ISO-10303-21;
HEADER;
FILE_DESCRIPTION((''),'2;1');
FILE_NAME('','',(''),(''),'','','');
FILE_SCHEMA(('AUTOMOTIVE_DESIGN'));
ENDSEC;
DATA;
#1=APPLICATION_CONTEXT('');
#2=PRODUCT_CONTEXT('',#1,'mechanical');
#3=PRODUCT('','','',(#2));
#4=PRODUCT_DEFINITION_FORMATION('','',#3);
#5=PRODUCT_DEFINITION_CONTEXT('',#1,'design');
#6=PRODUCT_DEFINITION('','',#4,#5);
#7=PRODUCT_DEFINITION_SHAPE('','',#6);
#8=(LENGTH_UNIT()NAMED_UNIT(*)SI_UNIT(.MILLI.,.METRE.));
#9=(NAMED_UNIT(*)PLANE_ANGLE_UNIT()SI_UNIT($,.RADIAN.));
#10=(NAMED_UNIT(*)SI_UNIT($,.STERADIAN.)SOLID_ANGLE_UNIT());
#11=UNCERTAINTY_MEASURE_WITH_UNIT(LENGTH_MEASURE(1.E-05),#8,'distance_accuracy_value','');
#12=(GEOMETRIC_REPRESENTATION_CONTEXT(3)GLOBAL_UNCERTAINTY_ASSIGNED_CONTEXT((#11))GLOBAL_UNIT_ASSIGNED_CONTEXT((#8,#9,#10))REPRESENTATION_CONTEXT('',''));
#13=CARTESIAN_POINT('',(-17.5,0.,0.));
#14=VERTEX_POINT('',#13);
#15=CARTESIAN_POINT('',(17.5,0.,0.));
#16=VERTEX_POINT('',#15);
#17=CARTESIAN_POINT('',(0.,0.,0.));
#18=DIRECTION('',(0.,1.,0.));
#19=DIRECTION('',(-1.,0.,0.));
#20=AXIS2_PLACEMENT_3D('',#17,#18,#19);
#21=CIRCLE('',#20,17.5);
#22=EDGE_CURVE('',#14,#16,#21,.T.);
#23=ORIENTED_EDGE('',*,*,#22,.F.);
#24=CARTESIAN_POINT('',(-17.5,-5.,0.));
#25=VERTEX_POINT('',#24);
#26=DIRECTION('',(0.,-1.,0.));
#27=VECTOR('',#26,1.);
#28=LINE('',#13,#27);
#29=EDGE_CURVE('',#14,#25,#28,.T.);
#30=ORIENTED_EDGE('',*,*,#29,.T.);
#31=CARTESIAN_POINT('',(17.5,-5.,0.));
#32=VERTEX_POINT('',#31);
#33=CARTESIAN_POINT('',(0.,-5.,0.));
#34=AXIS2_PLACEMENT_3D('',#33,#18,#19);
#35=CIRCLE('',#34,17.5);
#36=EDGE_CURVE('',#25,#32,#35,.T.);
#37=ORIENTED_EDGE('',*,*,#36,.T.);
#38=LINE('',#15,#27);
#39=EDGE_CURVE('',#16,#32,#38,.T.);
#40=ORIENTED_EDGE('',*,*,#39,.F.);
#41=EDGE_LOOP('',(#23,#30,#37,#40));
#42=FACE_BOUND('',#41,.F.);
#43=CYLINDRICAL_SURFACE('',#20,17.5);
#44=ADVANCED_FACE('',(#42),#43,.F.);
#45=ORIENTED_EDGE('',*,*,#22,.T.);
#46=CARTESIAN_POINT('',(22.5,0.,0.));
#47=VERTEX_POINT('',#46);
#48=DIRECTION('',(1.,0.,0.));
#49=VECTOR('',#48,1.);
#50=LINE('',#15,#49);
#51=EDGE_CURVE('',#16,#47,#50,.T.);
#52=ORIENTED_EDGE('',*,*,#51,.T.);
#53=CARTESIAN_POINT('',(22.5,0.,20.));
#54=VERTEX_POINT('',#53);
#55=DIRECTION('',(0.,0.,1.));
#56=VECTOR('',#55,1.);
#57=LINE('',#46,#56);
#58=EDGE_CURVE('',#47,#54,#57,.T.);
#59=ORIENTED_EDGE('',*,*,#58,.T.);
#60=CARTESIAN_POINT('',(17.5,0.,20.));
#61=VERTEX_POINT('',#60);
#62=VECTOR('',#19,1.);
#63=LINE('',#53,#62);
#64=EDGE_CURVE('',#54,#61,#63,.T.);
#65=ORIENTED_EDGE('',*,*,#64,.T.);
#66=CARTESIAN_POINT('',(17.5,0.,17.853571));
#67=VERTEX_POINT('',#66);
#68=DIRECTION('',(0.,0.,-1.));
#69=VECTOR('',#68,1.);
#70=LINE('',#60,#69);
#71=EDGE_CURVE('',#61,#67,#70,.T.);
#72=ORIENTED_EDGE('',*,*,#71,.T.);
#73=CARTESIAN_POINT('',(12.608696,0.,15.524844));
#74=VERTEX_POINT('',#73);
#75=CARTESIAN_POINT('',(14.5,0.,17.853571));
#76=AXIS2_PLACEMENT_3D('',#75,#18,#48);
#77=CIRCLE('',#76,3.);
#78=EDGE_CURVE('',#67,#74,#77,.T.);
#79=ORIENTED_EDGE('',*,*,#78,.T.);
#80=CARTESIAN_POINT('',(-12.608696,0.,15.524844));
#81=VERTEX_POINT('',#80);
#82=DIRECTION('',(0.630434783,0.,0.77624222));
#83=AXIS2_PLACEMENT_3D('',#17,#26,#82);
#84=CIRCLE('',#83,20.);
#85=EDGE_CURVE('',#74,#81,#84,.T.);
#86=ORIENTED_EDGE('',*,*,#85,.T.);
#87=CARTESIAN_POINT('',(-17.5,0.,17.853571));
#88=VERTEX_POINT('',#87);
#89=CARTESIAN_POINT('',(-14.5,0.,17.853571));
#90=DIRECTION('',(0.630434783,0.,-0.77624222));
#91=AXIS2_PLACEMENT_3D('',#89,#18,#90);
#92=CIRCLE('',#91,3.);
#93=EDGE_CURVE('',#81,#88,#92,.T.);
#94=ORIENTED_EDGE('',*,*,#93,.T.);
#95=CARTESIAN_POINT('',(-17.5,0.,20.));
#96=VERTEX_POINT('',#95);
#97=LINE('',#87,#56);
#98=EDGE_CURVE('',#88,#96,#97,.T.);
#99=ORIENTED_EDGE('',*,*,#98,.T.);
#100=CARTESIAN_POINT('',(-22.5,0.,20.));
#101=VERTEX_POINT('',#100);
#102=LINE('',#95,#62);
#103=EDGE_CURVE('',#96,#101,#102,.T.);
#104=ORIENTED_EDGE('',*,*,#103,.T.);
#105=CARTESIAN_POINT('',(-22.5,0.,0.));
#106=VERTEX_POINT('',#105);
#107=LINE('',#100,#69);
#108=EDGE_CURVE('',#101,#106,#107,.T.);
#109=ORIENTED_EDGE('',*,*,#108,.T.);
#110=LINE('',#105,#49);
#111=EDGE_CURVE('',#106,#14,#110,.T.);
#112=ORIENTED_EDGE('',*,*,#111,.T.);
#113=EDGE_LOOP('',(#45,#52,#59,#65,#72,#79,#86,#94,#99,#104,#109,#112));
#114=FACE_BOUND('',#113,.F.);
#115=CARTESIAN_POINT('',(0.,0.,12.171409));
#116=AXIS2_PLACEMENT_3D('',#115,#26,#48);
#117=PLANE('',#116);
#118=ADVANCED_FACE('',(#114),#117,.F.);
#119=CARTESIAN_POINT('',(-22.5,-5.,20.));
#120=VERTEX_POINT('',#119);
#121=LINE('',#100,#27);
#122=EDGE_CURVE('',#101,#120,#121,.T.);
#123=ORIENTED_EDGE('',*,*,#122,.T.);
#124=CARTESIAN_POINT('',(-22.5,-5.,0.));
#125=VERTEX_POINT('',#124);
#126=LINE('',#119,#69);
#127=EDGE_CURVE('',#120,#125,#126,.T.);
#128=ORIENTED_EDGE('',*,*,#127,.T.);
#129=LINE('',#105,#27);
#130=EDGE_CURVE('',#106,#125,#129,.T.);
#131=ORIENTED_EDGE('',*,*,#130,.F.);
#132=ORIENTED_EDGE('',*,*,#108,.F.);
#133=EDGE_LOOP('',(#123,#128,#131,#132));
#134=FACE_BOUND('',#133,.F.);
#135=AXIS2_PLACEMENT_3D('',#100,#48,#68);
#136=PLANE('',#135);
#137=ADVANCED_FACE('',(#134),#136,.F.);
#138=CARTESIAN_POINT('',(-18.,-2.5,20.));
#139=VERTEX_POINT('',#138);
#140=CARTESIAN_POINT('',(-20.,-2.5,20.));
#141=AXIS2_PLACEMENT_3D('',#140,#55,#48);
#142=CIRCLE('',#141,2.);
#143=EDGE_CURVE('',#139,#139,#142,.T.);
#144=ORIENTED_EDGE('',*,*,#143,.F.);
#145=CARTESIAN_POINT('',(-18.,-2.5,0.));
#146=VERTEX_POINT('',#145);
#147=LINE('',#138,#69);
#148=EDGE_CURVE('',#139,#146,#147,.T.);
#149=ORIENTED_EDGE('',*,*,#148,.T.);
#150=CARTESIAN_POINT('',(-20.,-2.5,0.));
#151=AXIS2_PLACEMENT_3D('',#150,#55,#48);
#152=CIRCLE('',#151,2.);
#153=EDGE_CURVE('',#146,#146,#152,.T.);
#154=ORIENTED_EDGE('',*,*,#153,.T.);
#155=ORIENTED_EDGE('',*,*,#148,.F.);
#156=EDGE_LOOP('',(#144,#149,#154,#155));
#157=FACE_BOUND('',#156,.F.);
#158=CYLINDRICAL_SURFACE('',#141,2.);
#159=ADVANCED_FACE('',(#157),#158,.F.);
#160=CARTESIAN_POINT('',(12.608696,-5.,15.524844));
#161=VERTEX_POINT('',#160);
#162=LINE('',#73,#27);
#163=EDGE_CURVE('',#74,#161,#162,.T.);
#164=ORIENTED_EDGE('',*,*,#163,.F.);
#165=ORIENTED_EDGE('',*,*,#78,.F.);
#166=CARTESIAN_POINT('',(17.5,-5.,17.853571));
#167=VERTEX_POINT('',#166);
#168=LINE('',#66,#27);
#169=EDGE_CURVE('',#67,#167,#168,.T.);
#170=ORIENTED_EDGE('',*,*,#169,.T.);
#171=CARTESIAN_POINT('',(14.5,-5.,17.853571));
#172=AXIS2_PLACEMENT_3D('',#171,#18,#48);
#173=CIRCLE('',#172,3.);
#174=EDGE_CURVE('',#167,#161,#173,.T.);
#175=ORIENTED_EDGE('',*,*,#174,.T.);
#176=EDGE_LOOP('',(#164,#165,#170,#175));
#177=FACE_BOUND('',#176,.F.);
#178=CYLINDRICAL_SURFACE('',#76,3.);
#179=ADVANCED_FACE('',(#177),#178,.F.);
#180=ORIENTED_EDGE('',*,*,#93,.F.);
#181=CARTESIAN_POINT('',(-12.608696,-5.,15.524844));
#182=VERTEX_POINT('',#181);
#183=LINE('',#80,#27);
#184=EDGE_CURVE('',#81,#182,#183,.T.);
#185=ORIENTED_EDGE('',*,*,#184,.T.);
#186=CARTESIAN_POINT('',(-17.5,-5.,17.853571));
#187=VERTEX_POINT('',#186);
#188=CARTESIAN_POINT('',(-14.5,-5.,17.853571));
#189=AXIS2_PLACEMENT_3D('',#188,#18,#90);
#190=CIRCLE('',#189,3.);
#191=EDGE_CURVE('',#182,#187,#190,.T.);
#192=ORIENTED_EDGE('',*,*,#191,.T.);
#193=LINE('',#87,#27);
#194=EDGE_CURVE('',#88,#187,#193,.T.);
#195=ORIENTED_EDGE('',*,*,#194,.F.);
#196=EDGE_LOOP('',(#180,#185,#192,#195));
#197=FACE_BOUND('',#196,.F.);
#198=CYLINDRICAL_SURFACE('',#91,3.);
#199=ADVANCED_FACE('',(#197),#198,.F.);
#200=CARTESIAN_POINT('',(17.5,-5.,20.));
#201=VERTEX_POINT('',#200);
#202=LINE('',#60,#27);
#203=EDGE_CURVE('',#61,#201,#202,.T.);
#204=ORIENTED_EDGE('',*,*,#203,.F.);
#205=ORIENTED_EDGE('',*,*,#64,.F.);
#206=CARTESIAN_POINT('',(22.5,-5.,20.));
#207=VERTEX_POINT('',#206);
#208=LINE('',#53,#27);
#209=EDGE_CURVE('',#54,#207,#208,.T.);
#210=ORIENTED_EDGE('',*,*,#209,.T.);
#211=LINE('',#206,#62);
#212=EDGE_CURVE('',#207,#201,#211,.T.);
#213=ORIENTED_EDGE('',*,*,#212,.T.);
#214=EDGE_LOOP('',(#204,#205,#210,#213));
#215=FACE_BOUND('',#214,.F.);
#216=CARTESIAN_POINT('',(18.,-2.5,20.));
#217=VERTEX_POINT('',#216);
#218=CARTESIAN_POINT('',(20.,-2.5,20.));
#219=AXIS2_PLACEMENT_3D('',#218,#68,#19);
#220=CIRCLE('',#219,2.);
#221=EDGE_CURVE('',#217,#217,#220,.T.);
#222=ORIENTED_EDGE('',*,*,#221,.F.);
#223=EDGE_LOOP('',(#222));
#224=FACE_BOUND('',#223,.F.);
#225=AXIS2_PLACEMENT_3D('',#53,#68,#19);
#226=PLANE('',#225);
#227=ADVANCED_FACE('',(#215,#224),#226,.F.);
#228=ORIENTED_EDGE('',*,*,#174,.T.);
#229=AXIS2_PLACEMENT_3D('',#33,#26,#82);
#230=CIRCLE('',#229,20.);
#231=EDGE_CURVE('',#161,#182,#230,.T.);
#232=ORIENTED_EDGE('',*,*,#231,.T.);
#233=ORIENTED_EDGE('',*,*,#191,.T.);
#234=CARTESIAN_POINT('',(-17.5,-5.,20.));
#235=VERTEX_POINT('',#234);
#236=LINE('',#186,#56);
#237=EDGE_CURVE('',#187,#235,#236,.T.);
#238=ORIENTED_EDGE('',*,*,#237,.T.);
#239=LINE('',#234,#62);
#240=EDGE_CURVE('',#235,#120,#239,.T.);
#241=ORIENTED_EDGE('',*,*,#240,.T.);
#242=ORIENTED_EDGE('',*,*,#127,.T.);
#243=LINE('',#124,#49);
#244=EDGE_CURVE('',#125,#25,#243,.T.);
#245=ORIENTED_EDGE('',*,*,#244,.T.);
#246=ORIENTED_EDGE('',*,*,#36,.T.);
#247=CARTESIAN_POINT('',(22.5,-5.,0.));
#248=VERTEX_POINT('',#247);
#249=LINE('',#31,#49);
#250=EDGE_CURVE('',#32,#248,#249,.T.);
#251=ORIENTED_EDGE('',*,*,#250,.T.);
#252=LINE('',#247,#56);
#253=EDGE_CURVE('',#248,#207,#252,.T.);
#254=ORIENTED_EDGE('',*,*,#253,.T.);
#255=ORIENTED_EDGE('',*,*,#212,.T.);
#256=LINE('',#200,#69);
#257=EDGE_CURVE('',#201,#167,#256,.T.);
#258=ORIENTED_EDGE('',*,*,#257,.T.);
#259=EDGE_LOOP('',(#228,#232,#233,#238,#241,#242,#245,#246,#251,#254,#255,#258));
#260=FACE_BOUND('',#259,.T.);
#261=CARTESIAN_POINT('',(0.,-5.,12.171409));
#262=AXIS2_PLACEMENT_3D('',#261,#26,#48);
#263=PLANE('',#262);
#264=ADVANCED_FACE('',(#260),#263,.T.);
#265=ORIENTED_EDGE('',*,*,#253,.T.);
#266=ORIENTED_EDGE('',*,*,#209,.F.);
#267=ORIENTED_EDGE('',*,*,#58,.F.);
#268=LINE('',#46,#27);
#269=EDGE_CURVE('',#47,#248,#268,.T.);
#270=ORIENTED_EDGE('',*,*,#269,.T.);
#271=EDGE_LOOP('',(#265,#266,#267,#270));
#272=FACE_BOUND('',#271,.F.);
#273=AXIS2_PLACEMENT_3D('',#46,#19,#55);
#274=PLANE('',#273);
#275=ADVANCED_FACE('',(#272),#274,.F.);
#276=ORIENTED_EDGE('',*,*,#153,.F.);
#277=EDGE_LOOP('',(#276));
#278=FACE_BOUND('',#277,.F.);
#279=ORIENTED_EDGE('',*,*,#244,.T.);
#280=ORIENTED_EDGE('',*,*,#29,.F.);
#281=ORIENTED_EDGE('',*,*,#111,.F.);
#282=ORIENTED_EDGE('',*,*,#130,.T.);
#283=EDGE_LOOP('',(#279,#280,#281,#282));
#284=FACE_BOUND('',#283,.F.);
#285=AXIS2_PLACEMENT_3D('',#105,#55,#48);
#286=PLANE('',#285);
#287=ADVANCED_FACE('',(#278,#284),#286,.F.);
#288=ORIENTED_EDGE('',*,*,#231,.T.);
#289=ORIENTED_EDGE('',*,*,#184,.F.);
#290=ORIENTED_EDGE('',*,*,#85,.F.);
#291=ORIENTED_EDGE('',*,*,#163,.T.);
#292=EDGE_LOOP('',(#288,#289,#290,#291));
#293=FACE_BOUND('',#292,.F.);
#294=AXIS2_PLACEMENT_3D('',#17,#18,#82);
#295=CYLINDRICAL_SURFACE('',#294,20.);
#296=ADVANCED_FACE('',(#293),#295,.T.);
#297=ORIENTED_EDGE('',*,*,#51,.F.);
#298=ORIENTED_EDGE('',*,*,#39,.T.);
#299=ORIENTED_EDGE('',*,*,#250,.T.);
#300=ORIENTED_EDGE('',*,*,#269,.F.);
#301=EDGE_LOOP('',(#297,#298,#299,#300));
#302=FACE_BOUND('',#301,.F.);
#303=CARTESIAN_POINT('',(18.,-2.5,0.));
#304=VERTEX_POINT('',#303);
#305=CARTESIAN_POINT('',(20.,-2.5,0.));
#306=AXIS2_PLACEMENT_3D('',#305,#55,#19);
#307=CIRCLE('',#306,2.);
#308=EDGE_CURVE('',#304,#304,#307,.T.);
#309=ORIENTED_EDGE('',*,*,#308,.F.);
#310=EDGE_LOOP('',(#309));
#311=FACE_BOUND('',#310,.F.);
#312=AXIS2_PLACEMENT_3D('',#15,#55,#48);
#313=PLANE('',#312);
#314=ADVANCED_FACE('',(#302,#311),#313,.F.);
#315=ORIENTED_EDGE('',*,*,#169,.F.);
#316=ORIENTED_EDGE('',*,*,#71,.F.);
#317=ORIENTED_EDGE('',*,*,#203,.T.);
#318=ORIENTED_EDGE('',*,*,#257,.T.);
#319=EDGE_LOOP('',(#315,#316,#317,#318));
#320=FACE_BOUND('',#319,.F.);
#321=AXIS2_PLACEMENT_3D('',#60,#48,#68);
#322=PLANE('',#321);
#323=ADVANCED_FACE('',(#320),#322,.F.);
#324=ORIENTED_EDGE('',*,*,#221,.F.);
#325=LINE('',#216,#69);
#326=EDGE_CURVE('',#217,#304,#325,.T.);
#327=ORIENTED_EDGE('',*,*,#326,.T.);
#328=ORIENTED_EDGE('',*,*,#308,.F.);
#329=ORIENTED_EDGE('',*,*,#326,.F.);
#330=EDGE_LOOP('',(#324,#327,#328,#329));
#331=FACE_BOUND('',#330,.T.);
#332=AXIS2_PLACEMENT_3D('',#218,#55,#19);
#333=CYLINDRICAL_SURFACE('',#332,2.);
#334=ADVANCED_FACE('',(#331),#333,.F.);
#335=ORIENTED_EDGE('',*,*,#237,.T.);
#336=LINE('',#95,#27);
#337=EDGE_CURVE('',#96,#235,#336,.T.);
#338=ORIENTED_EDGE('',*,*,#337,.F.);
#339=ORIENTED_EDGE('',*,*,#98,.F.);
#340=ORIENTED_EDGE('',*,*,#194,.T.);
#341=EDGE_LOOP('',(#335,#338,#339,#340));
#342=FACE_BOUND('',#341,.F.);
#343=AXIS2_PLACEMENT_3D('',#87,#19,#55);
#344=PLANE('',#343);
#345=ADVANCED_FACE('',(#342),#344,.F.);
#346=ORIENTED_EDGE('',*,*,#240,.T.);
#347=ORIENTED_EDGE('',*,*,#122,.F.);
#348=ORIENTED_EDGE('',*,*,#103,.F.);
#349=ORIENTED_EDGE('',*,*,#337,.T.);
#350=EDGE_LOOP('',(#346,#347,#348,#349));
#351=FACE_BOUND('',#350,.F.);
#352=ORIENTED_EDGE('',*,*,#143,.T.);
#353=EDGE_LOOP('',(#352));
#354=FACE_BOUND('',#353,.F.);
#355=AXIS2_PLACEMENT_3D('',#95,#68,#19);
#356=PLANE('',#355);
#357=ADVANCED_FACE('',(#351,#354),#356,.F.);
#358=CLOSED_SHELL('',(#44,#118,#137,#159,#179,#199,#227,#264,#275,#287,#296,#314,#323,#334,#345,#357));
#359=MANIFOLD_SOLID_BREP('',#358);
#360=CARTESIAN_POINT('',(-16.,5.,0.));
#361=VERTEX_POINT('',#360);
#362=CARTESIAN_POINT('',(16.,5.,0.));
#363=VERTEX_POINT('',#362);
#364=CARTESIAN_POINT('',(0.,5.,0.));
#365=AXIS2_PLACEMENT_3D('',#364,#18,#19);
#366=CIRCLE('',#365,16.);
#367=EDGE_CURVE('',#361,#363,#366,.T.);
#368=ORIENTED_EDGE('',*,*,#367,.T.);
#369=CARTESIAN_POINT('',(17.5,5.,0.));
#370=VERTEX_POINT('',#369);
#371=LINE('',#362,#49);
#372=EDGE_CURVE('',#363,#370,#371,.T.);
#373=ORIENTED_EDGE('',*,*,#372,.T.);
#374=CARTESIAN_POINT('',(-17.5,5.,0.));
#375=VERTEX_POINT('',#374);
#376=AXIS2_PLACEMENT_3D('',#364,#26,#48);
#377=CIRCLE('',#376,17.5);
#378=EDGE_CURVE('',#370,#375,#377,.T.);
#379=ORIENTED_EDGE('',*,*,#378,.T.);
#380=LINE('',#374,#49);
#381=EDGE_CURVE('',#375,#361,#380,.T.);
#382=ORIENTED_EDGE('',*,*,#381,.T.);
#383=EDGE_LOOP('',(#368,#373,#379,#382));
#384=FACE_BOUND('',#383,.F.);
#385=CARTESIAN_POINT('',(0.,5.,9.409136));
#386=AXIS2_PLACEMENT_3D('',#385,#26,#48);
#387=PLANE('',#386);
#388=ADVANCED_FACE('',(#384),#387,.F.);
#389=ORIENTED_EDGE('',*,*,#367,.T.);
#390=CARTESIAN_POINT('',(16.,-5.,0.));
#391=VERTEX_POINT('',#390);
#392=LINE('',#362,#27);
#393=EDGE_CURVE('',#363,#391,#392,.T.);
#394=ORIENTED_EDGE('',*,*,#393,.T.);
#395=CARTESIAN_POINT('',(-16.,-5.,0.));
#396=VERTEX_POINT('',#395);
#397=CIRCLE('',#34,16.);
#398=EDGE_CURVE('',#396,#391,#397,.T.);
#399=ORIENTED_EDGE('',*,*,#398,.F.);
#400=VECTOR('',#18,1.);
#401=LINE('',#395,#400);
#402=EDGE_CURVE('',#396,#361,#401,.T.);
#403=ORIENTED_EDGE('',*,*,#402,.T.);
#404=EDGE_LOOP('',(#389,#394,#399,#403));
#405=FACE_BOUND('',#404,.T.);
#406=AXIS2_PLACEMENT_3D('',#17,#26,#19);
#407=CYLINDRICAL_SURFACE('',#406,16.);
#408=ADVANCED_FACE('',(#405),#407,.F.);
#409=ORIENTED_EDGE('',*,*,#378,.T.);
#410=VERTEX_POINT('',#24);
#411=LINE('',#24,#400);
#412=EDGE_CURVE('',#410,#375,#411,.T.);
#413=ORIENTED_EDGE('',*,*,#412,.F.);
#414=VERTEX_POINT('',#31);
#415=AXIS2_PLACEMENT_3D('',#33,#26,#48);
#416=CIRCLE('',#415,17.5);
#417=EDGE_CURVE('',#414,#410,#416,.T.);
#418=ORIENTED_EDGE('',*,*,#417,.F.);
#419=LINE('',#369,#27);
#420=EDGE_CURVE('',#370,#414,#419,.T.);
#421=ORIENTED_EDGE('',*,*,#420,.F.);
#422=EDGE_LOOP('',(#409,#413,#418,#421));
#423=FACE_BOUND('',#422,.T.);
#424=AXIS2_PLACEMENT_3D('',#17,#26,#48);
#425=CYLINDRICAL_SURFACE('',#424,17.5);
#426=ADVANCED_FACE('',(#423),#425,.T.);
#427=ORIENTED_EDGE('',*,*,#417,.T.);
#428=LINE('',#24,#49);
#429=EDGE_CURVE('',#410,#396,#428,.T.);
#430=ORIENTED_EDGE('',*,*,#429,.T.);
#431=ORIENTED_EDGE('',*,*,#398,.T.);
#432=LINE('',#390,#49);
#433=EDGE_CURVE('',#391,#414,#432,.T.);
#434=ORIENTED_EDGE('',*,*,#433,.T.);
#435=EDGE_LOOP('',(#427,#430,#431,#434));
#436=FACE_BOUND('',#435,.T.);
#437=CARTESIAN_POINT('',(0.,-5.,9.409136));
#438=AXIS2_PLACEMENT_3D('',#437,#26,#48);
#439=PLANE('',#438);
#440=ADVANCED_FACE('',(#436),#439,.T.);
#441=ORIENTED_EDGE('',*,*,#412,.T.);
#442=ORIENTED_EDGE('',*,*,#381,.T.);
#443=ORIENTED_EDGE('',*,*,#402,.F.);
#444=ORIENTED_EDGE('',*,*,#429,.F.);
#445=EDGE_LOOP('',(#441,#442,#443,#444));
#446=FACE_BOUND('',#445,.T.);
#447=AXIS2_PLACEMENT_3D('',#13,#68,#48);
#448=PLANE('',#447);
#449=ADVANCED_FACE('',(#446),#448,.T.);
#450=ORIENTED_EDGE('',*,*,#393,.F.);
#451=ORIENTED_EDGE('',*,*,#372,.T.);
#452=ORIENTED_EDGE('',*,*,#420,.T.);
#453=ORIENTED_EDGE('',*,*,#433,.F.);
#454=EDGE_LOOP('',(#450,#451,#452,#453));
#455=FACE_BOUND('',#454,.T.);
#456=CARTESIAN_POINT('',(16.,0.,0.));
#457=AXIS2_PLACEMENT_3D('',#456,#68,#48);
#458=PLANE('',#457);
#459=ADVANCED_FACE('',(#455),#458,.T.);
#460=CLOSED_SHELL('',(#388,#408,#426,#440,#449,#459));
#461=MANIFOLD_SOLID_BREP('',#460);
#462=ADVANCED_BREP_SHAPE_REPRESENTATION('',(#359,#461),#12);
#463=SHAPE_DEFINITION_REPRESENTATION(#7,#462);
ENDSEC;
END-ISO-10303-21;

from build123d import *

# Parameters (mm, degrees)
F1_DEPTH = 5
F2_R     = 2
F3_DEPTH = 20.001
F5_DEPTH = 5


# Not quite as in the source:
# - a pattern or mirror of a feature is missing from the dataset's text; its kind, count and spacing are read off the source's solid


with BuildPart() as f1:
    # F0 (on Front) → F1 (new body)
    with BuildSketch(Plane.XZ):
        with BuildLine():
            ThreePointArc((-17.5, 0), (0, 17.5), (17.5, 0))
            Line((17.5, 0), (22.5, 0))
            Line((22.5, 0), (22.5, 20))
            Line((22.5, 20), (17.5, 20))
            Line((17.5, 20), (17.5, 17.8535710714))
            ThreePointArc((17.5, 17.8535710714), (15.7895904304, 15.1448893769), (12.6086956522, 15.5248444099))
            ThreePointArc((12.6086956522, 15.5248444099), (0, 20), (-12.6086956522, 15.5248444099))
            ThreePointArc((-12.6086956522, 15.5248444099), (-15.7895904304, 15.1448893769), (-17.5, 17.8535710714))
            Line((-17.5, 17.8535710714), (-17.5, 20))
            Line((-17.5, 20), (-22.5, 20))
            Line((-22.5, 20), (-22.5, 0))
            Line((-22.5, 0), (-17.5, 0))
        make_face()
    extrude(amount=F1_DEPTH)

    # F2 (on face) → F3 (cut, through all)
    with BuildSketch(Plane.XY.offset(20)):
        with Locations((-20, -2.5)):
            Circle(F2_R)
    f3 = extrude(amount=-F3_DEPTH, mode=Mode.SUBTRACT)

    # F3_copies: F3 across plane
    add(f3.mirror(Plane(origin=(0, 0, 0), x_dir=(0, 0, 1), z_dir=(1, 0, 0))), mode=Mode.SUBTRACT)


with BuildPart() as f5:
    # F4 (on Front) → F5 (new body, symmetric)
    with BuildSketch(Plane.XZ):
        with BuildLine():
            ThreePointArc((-16, 0), (0, 16), (16, 0))
            Line((16, 0), (17.5, 0))
            ThreePointArc((17.5, 0), (0, 17.5), (-17.5, 0))
            Line((-17.5, 0), (-16, 0))
        make_face()
    extrude(amount=F5_DEPTH, both=True)


solid = Compound([f1.part, f5.part])
